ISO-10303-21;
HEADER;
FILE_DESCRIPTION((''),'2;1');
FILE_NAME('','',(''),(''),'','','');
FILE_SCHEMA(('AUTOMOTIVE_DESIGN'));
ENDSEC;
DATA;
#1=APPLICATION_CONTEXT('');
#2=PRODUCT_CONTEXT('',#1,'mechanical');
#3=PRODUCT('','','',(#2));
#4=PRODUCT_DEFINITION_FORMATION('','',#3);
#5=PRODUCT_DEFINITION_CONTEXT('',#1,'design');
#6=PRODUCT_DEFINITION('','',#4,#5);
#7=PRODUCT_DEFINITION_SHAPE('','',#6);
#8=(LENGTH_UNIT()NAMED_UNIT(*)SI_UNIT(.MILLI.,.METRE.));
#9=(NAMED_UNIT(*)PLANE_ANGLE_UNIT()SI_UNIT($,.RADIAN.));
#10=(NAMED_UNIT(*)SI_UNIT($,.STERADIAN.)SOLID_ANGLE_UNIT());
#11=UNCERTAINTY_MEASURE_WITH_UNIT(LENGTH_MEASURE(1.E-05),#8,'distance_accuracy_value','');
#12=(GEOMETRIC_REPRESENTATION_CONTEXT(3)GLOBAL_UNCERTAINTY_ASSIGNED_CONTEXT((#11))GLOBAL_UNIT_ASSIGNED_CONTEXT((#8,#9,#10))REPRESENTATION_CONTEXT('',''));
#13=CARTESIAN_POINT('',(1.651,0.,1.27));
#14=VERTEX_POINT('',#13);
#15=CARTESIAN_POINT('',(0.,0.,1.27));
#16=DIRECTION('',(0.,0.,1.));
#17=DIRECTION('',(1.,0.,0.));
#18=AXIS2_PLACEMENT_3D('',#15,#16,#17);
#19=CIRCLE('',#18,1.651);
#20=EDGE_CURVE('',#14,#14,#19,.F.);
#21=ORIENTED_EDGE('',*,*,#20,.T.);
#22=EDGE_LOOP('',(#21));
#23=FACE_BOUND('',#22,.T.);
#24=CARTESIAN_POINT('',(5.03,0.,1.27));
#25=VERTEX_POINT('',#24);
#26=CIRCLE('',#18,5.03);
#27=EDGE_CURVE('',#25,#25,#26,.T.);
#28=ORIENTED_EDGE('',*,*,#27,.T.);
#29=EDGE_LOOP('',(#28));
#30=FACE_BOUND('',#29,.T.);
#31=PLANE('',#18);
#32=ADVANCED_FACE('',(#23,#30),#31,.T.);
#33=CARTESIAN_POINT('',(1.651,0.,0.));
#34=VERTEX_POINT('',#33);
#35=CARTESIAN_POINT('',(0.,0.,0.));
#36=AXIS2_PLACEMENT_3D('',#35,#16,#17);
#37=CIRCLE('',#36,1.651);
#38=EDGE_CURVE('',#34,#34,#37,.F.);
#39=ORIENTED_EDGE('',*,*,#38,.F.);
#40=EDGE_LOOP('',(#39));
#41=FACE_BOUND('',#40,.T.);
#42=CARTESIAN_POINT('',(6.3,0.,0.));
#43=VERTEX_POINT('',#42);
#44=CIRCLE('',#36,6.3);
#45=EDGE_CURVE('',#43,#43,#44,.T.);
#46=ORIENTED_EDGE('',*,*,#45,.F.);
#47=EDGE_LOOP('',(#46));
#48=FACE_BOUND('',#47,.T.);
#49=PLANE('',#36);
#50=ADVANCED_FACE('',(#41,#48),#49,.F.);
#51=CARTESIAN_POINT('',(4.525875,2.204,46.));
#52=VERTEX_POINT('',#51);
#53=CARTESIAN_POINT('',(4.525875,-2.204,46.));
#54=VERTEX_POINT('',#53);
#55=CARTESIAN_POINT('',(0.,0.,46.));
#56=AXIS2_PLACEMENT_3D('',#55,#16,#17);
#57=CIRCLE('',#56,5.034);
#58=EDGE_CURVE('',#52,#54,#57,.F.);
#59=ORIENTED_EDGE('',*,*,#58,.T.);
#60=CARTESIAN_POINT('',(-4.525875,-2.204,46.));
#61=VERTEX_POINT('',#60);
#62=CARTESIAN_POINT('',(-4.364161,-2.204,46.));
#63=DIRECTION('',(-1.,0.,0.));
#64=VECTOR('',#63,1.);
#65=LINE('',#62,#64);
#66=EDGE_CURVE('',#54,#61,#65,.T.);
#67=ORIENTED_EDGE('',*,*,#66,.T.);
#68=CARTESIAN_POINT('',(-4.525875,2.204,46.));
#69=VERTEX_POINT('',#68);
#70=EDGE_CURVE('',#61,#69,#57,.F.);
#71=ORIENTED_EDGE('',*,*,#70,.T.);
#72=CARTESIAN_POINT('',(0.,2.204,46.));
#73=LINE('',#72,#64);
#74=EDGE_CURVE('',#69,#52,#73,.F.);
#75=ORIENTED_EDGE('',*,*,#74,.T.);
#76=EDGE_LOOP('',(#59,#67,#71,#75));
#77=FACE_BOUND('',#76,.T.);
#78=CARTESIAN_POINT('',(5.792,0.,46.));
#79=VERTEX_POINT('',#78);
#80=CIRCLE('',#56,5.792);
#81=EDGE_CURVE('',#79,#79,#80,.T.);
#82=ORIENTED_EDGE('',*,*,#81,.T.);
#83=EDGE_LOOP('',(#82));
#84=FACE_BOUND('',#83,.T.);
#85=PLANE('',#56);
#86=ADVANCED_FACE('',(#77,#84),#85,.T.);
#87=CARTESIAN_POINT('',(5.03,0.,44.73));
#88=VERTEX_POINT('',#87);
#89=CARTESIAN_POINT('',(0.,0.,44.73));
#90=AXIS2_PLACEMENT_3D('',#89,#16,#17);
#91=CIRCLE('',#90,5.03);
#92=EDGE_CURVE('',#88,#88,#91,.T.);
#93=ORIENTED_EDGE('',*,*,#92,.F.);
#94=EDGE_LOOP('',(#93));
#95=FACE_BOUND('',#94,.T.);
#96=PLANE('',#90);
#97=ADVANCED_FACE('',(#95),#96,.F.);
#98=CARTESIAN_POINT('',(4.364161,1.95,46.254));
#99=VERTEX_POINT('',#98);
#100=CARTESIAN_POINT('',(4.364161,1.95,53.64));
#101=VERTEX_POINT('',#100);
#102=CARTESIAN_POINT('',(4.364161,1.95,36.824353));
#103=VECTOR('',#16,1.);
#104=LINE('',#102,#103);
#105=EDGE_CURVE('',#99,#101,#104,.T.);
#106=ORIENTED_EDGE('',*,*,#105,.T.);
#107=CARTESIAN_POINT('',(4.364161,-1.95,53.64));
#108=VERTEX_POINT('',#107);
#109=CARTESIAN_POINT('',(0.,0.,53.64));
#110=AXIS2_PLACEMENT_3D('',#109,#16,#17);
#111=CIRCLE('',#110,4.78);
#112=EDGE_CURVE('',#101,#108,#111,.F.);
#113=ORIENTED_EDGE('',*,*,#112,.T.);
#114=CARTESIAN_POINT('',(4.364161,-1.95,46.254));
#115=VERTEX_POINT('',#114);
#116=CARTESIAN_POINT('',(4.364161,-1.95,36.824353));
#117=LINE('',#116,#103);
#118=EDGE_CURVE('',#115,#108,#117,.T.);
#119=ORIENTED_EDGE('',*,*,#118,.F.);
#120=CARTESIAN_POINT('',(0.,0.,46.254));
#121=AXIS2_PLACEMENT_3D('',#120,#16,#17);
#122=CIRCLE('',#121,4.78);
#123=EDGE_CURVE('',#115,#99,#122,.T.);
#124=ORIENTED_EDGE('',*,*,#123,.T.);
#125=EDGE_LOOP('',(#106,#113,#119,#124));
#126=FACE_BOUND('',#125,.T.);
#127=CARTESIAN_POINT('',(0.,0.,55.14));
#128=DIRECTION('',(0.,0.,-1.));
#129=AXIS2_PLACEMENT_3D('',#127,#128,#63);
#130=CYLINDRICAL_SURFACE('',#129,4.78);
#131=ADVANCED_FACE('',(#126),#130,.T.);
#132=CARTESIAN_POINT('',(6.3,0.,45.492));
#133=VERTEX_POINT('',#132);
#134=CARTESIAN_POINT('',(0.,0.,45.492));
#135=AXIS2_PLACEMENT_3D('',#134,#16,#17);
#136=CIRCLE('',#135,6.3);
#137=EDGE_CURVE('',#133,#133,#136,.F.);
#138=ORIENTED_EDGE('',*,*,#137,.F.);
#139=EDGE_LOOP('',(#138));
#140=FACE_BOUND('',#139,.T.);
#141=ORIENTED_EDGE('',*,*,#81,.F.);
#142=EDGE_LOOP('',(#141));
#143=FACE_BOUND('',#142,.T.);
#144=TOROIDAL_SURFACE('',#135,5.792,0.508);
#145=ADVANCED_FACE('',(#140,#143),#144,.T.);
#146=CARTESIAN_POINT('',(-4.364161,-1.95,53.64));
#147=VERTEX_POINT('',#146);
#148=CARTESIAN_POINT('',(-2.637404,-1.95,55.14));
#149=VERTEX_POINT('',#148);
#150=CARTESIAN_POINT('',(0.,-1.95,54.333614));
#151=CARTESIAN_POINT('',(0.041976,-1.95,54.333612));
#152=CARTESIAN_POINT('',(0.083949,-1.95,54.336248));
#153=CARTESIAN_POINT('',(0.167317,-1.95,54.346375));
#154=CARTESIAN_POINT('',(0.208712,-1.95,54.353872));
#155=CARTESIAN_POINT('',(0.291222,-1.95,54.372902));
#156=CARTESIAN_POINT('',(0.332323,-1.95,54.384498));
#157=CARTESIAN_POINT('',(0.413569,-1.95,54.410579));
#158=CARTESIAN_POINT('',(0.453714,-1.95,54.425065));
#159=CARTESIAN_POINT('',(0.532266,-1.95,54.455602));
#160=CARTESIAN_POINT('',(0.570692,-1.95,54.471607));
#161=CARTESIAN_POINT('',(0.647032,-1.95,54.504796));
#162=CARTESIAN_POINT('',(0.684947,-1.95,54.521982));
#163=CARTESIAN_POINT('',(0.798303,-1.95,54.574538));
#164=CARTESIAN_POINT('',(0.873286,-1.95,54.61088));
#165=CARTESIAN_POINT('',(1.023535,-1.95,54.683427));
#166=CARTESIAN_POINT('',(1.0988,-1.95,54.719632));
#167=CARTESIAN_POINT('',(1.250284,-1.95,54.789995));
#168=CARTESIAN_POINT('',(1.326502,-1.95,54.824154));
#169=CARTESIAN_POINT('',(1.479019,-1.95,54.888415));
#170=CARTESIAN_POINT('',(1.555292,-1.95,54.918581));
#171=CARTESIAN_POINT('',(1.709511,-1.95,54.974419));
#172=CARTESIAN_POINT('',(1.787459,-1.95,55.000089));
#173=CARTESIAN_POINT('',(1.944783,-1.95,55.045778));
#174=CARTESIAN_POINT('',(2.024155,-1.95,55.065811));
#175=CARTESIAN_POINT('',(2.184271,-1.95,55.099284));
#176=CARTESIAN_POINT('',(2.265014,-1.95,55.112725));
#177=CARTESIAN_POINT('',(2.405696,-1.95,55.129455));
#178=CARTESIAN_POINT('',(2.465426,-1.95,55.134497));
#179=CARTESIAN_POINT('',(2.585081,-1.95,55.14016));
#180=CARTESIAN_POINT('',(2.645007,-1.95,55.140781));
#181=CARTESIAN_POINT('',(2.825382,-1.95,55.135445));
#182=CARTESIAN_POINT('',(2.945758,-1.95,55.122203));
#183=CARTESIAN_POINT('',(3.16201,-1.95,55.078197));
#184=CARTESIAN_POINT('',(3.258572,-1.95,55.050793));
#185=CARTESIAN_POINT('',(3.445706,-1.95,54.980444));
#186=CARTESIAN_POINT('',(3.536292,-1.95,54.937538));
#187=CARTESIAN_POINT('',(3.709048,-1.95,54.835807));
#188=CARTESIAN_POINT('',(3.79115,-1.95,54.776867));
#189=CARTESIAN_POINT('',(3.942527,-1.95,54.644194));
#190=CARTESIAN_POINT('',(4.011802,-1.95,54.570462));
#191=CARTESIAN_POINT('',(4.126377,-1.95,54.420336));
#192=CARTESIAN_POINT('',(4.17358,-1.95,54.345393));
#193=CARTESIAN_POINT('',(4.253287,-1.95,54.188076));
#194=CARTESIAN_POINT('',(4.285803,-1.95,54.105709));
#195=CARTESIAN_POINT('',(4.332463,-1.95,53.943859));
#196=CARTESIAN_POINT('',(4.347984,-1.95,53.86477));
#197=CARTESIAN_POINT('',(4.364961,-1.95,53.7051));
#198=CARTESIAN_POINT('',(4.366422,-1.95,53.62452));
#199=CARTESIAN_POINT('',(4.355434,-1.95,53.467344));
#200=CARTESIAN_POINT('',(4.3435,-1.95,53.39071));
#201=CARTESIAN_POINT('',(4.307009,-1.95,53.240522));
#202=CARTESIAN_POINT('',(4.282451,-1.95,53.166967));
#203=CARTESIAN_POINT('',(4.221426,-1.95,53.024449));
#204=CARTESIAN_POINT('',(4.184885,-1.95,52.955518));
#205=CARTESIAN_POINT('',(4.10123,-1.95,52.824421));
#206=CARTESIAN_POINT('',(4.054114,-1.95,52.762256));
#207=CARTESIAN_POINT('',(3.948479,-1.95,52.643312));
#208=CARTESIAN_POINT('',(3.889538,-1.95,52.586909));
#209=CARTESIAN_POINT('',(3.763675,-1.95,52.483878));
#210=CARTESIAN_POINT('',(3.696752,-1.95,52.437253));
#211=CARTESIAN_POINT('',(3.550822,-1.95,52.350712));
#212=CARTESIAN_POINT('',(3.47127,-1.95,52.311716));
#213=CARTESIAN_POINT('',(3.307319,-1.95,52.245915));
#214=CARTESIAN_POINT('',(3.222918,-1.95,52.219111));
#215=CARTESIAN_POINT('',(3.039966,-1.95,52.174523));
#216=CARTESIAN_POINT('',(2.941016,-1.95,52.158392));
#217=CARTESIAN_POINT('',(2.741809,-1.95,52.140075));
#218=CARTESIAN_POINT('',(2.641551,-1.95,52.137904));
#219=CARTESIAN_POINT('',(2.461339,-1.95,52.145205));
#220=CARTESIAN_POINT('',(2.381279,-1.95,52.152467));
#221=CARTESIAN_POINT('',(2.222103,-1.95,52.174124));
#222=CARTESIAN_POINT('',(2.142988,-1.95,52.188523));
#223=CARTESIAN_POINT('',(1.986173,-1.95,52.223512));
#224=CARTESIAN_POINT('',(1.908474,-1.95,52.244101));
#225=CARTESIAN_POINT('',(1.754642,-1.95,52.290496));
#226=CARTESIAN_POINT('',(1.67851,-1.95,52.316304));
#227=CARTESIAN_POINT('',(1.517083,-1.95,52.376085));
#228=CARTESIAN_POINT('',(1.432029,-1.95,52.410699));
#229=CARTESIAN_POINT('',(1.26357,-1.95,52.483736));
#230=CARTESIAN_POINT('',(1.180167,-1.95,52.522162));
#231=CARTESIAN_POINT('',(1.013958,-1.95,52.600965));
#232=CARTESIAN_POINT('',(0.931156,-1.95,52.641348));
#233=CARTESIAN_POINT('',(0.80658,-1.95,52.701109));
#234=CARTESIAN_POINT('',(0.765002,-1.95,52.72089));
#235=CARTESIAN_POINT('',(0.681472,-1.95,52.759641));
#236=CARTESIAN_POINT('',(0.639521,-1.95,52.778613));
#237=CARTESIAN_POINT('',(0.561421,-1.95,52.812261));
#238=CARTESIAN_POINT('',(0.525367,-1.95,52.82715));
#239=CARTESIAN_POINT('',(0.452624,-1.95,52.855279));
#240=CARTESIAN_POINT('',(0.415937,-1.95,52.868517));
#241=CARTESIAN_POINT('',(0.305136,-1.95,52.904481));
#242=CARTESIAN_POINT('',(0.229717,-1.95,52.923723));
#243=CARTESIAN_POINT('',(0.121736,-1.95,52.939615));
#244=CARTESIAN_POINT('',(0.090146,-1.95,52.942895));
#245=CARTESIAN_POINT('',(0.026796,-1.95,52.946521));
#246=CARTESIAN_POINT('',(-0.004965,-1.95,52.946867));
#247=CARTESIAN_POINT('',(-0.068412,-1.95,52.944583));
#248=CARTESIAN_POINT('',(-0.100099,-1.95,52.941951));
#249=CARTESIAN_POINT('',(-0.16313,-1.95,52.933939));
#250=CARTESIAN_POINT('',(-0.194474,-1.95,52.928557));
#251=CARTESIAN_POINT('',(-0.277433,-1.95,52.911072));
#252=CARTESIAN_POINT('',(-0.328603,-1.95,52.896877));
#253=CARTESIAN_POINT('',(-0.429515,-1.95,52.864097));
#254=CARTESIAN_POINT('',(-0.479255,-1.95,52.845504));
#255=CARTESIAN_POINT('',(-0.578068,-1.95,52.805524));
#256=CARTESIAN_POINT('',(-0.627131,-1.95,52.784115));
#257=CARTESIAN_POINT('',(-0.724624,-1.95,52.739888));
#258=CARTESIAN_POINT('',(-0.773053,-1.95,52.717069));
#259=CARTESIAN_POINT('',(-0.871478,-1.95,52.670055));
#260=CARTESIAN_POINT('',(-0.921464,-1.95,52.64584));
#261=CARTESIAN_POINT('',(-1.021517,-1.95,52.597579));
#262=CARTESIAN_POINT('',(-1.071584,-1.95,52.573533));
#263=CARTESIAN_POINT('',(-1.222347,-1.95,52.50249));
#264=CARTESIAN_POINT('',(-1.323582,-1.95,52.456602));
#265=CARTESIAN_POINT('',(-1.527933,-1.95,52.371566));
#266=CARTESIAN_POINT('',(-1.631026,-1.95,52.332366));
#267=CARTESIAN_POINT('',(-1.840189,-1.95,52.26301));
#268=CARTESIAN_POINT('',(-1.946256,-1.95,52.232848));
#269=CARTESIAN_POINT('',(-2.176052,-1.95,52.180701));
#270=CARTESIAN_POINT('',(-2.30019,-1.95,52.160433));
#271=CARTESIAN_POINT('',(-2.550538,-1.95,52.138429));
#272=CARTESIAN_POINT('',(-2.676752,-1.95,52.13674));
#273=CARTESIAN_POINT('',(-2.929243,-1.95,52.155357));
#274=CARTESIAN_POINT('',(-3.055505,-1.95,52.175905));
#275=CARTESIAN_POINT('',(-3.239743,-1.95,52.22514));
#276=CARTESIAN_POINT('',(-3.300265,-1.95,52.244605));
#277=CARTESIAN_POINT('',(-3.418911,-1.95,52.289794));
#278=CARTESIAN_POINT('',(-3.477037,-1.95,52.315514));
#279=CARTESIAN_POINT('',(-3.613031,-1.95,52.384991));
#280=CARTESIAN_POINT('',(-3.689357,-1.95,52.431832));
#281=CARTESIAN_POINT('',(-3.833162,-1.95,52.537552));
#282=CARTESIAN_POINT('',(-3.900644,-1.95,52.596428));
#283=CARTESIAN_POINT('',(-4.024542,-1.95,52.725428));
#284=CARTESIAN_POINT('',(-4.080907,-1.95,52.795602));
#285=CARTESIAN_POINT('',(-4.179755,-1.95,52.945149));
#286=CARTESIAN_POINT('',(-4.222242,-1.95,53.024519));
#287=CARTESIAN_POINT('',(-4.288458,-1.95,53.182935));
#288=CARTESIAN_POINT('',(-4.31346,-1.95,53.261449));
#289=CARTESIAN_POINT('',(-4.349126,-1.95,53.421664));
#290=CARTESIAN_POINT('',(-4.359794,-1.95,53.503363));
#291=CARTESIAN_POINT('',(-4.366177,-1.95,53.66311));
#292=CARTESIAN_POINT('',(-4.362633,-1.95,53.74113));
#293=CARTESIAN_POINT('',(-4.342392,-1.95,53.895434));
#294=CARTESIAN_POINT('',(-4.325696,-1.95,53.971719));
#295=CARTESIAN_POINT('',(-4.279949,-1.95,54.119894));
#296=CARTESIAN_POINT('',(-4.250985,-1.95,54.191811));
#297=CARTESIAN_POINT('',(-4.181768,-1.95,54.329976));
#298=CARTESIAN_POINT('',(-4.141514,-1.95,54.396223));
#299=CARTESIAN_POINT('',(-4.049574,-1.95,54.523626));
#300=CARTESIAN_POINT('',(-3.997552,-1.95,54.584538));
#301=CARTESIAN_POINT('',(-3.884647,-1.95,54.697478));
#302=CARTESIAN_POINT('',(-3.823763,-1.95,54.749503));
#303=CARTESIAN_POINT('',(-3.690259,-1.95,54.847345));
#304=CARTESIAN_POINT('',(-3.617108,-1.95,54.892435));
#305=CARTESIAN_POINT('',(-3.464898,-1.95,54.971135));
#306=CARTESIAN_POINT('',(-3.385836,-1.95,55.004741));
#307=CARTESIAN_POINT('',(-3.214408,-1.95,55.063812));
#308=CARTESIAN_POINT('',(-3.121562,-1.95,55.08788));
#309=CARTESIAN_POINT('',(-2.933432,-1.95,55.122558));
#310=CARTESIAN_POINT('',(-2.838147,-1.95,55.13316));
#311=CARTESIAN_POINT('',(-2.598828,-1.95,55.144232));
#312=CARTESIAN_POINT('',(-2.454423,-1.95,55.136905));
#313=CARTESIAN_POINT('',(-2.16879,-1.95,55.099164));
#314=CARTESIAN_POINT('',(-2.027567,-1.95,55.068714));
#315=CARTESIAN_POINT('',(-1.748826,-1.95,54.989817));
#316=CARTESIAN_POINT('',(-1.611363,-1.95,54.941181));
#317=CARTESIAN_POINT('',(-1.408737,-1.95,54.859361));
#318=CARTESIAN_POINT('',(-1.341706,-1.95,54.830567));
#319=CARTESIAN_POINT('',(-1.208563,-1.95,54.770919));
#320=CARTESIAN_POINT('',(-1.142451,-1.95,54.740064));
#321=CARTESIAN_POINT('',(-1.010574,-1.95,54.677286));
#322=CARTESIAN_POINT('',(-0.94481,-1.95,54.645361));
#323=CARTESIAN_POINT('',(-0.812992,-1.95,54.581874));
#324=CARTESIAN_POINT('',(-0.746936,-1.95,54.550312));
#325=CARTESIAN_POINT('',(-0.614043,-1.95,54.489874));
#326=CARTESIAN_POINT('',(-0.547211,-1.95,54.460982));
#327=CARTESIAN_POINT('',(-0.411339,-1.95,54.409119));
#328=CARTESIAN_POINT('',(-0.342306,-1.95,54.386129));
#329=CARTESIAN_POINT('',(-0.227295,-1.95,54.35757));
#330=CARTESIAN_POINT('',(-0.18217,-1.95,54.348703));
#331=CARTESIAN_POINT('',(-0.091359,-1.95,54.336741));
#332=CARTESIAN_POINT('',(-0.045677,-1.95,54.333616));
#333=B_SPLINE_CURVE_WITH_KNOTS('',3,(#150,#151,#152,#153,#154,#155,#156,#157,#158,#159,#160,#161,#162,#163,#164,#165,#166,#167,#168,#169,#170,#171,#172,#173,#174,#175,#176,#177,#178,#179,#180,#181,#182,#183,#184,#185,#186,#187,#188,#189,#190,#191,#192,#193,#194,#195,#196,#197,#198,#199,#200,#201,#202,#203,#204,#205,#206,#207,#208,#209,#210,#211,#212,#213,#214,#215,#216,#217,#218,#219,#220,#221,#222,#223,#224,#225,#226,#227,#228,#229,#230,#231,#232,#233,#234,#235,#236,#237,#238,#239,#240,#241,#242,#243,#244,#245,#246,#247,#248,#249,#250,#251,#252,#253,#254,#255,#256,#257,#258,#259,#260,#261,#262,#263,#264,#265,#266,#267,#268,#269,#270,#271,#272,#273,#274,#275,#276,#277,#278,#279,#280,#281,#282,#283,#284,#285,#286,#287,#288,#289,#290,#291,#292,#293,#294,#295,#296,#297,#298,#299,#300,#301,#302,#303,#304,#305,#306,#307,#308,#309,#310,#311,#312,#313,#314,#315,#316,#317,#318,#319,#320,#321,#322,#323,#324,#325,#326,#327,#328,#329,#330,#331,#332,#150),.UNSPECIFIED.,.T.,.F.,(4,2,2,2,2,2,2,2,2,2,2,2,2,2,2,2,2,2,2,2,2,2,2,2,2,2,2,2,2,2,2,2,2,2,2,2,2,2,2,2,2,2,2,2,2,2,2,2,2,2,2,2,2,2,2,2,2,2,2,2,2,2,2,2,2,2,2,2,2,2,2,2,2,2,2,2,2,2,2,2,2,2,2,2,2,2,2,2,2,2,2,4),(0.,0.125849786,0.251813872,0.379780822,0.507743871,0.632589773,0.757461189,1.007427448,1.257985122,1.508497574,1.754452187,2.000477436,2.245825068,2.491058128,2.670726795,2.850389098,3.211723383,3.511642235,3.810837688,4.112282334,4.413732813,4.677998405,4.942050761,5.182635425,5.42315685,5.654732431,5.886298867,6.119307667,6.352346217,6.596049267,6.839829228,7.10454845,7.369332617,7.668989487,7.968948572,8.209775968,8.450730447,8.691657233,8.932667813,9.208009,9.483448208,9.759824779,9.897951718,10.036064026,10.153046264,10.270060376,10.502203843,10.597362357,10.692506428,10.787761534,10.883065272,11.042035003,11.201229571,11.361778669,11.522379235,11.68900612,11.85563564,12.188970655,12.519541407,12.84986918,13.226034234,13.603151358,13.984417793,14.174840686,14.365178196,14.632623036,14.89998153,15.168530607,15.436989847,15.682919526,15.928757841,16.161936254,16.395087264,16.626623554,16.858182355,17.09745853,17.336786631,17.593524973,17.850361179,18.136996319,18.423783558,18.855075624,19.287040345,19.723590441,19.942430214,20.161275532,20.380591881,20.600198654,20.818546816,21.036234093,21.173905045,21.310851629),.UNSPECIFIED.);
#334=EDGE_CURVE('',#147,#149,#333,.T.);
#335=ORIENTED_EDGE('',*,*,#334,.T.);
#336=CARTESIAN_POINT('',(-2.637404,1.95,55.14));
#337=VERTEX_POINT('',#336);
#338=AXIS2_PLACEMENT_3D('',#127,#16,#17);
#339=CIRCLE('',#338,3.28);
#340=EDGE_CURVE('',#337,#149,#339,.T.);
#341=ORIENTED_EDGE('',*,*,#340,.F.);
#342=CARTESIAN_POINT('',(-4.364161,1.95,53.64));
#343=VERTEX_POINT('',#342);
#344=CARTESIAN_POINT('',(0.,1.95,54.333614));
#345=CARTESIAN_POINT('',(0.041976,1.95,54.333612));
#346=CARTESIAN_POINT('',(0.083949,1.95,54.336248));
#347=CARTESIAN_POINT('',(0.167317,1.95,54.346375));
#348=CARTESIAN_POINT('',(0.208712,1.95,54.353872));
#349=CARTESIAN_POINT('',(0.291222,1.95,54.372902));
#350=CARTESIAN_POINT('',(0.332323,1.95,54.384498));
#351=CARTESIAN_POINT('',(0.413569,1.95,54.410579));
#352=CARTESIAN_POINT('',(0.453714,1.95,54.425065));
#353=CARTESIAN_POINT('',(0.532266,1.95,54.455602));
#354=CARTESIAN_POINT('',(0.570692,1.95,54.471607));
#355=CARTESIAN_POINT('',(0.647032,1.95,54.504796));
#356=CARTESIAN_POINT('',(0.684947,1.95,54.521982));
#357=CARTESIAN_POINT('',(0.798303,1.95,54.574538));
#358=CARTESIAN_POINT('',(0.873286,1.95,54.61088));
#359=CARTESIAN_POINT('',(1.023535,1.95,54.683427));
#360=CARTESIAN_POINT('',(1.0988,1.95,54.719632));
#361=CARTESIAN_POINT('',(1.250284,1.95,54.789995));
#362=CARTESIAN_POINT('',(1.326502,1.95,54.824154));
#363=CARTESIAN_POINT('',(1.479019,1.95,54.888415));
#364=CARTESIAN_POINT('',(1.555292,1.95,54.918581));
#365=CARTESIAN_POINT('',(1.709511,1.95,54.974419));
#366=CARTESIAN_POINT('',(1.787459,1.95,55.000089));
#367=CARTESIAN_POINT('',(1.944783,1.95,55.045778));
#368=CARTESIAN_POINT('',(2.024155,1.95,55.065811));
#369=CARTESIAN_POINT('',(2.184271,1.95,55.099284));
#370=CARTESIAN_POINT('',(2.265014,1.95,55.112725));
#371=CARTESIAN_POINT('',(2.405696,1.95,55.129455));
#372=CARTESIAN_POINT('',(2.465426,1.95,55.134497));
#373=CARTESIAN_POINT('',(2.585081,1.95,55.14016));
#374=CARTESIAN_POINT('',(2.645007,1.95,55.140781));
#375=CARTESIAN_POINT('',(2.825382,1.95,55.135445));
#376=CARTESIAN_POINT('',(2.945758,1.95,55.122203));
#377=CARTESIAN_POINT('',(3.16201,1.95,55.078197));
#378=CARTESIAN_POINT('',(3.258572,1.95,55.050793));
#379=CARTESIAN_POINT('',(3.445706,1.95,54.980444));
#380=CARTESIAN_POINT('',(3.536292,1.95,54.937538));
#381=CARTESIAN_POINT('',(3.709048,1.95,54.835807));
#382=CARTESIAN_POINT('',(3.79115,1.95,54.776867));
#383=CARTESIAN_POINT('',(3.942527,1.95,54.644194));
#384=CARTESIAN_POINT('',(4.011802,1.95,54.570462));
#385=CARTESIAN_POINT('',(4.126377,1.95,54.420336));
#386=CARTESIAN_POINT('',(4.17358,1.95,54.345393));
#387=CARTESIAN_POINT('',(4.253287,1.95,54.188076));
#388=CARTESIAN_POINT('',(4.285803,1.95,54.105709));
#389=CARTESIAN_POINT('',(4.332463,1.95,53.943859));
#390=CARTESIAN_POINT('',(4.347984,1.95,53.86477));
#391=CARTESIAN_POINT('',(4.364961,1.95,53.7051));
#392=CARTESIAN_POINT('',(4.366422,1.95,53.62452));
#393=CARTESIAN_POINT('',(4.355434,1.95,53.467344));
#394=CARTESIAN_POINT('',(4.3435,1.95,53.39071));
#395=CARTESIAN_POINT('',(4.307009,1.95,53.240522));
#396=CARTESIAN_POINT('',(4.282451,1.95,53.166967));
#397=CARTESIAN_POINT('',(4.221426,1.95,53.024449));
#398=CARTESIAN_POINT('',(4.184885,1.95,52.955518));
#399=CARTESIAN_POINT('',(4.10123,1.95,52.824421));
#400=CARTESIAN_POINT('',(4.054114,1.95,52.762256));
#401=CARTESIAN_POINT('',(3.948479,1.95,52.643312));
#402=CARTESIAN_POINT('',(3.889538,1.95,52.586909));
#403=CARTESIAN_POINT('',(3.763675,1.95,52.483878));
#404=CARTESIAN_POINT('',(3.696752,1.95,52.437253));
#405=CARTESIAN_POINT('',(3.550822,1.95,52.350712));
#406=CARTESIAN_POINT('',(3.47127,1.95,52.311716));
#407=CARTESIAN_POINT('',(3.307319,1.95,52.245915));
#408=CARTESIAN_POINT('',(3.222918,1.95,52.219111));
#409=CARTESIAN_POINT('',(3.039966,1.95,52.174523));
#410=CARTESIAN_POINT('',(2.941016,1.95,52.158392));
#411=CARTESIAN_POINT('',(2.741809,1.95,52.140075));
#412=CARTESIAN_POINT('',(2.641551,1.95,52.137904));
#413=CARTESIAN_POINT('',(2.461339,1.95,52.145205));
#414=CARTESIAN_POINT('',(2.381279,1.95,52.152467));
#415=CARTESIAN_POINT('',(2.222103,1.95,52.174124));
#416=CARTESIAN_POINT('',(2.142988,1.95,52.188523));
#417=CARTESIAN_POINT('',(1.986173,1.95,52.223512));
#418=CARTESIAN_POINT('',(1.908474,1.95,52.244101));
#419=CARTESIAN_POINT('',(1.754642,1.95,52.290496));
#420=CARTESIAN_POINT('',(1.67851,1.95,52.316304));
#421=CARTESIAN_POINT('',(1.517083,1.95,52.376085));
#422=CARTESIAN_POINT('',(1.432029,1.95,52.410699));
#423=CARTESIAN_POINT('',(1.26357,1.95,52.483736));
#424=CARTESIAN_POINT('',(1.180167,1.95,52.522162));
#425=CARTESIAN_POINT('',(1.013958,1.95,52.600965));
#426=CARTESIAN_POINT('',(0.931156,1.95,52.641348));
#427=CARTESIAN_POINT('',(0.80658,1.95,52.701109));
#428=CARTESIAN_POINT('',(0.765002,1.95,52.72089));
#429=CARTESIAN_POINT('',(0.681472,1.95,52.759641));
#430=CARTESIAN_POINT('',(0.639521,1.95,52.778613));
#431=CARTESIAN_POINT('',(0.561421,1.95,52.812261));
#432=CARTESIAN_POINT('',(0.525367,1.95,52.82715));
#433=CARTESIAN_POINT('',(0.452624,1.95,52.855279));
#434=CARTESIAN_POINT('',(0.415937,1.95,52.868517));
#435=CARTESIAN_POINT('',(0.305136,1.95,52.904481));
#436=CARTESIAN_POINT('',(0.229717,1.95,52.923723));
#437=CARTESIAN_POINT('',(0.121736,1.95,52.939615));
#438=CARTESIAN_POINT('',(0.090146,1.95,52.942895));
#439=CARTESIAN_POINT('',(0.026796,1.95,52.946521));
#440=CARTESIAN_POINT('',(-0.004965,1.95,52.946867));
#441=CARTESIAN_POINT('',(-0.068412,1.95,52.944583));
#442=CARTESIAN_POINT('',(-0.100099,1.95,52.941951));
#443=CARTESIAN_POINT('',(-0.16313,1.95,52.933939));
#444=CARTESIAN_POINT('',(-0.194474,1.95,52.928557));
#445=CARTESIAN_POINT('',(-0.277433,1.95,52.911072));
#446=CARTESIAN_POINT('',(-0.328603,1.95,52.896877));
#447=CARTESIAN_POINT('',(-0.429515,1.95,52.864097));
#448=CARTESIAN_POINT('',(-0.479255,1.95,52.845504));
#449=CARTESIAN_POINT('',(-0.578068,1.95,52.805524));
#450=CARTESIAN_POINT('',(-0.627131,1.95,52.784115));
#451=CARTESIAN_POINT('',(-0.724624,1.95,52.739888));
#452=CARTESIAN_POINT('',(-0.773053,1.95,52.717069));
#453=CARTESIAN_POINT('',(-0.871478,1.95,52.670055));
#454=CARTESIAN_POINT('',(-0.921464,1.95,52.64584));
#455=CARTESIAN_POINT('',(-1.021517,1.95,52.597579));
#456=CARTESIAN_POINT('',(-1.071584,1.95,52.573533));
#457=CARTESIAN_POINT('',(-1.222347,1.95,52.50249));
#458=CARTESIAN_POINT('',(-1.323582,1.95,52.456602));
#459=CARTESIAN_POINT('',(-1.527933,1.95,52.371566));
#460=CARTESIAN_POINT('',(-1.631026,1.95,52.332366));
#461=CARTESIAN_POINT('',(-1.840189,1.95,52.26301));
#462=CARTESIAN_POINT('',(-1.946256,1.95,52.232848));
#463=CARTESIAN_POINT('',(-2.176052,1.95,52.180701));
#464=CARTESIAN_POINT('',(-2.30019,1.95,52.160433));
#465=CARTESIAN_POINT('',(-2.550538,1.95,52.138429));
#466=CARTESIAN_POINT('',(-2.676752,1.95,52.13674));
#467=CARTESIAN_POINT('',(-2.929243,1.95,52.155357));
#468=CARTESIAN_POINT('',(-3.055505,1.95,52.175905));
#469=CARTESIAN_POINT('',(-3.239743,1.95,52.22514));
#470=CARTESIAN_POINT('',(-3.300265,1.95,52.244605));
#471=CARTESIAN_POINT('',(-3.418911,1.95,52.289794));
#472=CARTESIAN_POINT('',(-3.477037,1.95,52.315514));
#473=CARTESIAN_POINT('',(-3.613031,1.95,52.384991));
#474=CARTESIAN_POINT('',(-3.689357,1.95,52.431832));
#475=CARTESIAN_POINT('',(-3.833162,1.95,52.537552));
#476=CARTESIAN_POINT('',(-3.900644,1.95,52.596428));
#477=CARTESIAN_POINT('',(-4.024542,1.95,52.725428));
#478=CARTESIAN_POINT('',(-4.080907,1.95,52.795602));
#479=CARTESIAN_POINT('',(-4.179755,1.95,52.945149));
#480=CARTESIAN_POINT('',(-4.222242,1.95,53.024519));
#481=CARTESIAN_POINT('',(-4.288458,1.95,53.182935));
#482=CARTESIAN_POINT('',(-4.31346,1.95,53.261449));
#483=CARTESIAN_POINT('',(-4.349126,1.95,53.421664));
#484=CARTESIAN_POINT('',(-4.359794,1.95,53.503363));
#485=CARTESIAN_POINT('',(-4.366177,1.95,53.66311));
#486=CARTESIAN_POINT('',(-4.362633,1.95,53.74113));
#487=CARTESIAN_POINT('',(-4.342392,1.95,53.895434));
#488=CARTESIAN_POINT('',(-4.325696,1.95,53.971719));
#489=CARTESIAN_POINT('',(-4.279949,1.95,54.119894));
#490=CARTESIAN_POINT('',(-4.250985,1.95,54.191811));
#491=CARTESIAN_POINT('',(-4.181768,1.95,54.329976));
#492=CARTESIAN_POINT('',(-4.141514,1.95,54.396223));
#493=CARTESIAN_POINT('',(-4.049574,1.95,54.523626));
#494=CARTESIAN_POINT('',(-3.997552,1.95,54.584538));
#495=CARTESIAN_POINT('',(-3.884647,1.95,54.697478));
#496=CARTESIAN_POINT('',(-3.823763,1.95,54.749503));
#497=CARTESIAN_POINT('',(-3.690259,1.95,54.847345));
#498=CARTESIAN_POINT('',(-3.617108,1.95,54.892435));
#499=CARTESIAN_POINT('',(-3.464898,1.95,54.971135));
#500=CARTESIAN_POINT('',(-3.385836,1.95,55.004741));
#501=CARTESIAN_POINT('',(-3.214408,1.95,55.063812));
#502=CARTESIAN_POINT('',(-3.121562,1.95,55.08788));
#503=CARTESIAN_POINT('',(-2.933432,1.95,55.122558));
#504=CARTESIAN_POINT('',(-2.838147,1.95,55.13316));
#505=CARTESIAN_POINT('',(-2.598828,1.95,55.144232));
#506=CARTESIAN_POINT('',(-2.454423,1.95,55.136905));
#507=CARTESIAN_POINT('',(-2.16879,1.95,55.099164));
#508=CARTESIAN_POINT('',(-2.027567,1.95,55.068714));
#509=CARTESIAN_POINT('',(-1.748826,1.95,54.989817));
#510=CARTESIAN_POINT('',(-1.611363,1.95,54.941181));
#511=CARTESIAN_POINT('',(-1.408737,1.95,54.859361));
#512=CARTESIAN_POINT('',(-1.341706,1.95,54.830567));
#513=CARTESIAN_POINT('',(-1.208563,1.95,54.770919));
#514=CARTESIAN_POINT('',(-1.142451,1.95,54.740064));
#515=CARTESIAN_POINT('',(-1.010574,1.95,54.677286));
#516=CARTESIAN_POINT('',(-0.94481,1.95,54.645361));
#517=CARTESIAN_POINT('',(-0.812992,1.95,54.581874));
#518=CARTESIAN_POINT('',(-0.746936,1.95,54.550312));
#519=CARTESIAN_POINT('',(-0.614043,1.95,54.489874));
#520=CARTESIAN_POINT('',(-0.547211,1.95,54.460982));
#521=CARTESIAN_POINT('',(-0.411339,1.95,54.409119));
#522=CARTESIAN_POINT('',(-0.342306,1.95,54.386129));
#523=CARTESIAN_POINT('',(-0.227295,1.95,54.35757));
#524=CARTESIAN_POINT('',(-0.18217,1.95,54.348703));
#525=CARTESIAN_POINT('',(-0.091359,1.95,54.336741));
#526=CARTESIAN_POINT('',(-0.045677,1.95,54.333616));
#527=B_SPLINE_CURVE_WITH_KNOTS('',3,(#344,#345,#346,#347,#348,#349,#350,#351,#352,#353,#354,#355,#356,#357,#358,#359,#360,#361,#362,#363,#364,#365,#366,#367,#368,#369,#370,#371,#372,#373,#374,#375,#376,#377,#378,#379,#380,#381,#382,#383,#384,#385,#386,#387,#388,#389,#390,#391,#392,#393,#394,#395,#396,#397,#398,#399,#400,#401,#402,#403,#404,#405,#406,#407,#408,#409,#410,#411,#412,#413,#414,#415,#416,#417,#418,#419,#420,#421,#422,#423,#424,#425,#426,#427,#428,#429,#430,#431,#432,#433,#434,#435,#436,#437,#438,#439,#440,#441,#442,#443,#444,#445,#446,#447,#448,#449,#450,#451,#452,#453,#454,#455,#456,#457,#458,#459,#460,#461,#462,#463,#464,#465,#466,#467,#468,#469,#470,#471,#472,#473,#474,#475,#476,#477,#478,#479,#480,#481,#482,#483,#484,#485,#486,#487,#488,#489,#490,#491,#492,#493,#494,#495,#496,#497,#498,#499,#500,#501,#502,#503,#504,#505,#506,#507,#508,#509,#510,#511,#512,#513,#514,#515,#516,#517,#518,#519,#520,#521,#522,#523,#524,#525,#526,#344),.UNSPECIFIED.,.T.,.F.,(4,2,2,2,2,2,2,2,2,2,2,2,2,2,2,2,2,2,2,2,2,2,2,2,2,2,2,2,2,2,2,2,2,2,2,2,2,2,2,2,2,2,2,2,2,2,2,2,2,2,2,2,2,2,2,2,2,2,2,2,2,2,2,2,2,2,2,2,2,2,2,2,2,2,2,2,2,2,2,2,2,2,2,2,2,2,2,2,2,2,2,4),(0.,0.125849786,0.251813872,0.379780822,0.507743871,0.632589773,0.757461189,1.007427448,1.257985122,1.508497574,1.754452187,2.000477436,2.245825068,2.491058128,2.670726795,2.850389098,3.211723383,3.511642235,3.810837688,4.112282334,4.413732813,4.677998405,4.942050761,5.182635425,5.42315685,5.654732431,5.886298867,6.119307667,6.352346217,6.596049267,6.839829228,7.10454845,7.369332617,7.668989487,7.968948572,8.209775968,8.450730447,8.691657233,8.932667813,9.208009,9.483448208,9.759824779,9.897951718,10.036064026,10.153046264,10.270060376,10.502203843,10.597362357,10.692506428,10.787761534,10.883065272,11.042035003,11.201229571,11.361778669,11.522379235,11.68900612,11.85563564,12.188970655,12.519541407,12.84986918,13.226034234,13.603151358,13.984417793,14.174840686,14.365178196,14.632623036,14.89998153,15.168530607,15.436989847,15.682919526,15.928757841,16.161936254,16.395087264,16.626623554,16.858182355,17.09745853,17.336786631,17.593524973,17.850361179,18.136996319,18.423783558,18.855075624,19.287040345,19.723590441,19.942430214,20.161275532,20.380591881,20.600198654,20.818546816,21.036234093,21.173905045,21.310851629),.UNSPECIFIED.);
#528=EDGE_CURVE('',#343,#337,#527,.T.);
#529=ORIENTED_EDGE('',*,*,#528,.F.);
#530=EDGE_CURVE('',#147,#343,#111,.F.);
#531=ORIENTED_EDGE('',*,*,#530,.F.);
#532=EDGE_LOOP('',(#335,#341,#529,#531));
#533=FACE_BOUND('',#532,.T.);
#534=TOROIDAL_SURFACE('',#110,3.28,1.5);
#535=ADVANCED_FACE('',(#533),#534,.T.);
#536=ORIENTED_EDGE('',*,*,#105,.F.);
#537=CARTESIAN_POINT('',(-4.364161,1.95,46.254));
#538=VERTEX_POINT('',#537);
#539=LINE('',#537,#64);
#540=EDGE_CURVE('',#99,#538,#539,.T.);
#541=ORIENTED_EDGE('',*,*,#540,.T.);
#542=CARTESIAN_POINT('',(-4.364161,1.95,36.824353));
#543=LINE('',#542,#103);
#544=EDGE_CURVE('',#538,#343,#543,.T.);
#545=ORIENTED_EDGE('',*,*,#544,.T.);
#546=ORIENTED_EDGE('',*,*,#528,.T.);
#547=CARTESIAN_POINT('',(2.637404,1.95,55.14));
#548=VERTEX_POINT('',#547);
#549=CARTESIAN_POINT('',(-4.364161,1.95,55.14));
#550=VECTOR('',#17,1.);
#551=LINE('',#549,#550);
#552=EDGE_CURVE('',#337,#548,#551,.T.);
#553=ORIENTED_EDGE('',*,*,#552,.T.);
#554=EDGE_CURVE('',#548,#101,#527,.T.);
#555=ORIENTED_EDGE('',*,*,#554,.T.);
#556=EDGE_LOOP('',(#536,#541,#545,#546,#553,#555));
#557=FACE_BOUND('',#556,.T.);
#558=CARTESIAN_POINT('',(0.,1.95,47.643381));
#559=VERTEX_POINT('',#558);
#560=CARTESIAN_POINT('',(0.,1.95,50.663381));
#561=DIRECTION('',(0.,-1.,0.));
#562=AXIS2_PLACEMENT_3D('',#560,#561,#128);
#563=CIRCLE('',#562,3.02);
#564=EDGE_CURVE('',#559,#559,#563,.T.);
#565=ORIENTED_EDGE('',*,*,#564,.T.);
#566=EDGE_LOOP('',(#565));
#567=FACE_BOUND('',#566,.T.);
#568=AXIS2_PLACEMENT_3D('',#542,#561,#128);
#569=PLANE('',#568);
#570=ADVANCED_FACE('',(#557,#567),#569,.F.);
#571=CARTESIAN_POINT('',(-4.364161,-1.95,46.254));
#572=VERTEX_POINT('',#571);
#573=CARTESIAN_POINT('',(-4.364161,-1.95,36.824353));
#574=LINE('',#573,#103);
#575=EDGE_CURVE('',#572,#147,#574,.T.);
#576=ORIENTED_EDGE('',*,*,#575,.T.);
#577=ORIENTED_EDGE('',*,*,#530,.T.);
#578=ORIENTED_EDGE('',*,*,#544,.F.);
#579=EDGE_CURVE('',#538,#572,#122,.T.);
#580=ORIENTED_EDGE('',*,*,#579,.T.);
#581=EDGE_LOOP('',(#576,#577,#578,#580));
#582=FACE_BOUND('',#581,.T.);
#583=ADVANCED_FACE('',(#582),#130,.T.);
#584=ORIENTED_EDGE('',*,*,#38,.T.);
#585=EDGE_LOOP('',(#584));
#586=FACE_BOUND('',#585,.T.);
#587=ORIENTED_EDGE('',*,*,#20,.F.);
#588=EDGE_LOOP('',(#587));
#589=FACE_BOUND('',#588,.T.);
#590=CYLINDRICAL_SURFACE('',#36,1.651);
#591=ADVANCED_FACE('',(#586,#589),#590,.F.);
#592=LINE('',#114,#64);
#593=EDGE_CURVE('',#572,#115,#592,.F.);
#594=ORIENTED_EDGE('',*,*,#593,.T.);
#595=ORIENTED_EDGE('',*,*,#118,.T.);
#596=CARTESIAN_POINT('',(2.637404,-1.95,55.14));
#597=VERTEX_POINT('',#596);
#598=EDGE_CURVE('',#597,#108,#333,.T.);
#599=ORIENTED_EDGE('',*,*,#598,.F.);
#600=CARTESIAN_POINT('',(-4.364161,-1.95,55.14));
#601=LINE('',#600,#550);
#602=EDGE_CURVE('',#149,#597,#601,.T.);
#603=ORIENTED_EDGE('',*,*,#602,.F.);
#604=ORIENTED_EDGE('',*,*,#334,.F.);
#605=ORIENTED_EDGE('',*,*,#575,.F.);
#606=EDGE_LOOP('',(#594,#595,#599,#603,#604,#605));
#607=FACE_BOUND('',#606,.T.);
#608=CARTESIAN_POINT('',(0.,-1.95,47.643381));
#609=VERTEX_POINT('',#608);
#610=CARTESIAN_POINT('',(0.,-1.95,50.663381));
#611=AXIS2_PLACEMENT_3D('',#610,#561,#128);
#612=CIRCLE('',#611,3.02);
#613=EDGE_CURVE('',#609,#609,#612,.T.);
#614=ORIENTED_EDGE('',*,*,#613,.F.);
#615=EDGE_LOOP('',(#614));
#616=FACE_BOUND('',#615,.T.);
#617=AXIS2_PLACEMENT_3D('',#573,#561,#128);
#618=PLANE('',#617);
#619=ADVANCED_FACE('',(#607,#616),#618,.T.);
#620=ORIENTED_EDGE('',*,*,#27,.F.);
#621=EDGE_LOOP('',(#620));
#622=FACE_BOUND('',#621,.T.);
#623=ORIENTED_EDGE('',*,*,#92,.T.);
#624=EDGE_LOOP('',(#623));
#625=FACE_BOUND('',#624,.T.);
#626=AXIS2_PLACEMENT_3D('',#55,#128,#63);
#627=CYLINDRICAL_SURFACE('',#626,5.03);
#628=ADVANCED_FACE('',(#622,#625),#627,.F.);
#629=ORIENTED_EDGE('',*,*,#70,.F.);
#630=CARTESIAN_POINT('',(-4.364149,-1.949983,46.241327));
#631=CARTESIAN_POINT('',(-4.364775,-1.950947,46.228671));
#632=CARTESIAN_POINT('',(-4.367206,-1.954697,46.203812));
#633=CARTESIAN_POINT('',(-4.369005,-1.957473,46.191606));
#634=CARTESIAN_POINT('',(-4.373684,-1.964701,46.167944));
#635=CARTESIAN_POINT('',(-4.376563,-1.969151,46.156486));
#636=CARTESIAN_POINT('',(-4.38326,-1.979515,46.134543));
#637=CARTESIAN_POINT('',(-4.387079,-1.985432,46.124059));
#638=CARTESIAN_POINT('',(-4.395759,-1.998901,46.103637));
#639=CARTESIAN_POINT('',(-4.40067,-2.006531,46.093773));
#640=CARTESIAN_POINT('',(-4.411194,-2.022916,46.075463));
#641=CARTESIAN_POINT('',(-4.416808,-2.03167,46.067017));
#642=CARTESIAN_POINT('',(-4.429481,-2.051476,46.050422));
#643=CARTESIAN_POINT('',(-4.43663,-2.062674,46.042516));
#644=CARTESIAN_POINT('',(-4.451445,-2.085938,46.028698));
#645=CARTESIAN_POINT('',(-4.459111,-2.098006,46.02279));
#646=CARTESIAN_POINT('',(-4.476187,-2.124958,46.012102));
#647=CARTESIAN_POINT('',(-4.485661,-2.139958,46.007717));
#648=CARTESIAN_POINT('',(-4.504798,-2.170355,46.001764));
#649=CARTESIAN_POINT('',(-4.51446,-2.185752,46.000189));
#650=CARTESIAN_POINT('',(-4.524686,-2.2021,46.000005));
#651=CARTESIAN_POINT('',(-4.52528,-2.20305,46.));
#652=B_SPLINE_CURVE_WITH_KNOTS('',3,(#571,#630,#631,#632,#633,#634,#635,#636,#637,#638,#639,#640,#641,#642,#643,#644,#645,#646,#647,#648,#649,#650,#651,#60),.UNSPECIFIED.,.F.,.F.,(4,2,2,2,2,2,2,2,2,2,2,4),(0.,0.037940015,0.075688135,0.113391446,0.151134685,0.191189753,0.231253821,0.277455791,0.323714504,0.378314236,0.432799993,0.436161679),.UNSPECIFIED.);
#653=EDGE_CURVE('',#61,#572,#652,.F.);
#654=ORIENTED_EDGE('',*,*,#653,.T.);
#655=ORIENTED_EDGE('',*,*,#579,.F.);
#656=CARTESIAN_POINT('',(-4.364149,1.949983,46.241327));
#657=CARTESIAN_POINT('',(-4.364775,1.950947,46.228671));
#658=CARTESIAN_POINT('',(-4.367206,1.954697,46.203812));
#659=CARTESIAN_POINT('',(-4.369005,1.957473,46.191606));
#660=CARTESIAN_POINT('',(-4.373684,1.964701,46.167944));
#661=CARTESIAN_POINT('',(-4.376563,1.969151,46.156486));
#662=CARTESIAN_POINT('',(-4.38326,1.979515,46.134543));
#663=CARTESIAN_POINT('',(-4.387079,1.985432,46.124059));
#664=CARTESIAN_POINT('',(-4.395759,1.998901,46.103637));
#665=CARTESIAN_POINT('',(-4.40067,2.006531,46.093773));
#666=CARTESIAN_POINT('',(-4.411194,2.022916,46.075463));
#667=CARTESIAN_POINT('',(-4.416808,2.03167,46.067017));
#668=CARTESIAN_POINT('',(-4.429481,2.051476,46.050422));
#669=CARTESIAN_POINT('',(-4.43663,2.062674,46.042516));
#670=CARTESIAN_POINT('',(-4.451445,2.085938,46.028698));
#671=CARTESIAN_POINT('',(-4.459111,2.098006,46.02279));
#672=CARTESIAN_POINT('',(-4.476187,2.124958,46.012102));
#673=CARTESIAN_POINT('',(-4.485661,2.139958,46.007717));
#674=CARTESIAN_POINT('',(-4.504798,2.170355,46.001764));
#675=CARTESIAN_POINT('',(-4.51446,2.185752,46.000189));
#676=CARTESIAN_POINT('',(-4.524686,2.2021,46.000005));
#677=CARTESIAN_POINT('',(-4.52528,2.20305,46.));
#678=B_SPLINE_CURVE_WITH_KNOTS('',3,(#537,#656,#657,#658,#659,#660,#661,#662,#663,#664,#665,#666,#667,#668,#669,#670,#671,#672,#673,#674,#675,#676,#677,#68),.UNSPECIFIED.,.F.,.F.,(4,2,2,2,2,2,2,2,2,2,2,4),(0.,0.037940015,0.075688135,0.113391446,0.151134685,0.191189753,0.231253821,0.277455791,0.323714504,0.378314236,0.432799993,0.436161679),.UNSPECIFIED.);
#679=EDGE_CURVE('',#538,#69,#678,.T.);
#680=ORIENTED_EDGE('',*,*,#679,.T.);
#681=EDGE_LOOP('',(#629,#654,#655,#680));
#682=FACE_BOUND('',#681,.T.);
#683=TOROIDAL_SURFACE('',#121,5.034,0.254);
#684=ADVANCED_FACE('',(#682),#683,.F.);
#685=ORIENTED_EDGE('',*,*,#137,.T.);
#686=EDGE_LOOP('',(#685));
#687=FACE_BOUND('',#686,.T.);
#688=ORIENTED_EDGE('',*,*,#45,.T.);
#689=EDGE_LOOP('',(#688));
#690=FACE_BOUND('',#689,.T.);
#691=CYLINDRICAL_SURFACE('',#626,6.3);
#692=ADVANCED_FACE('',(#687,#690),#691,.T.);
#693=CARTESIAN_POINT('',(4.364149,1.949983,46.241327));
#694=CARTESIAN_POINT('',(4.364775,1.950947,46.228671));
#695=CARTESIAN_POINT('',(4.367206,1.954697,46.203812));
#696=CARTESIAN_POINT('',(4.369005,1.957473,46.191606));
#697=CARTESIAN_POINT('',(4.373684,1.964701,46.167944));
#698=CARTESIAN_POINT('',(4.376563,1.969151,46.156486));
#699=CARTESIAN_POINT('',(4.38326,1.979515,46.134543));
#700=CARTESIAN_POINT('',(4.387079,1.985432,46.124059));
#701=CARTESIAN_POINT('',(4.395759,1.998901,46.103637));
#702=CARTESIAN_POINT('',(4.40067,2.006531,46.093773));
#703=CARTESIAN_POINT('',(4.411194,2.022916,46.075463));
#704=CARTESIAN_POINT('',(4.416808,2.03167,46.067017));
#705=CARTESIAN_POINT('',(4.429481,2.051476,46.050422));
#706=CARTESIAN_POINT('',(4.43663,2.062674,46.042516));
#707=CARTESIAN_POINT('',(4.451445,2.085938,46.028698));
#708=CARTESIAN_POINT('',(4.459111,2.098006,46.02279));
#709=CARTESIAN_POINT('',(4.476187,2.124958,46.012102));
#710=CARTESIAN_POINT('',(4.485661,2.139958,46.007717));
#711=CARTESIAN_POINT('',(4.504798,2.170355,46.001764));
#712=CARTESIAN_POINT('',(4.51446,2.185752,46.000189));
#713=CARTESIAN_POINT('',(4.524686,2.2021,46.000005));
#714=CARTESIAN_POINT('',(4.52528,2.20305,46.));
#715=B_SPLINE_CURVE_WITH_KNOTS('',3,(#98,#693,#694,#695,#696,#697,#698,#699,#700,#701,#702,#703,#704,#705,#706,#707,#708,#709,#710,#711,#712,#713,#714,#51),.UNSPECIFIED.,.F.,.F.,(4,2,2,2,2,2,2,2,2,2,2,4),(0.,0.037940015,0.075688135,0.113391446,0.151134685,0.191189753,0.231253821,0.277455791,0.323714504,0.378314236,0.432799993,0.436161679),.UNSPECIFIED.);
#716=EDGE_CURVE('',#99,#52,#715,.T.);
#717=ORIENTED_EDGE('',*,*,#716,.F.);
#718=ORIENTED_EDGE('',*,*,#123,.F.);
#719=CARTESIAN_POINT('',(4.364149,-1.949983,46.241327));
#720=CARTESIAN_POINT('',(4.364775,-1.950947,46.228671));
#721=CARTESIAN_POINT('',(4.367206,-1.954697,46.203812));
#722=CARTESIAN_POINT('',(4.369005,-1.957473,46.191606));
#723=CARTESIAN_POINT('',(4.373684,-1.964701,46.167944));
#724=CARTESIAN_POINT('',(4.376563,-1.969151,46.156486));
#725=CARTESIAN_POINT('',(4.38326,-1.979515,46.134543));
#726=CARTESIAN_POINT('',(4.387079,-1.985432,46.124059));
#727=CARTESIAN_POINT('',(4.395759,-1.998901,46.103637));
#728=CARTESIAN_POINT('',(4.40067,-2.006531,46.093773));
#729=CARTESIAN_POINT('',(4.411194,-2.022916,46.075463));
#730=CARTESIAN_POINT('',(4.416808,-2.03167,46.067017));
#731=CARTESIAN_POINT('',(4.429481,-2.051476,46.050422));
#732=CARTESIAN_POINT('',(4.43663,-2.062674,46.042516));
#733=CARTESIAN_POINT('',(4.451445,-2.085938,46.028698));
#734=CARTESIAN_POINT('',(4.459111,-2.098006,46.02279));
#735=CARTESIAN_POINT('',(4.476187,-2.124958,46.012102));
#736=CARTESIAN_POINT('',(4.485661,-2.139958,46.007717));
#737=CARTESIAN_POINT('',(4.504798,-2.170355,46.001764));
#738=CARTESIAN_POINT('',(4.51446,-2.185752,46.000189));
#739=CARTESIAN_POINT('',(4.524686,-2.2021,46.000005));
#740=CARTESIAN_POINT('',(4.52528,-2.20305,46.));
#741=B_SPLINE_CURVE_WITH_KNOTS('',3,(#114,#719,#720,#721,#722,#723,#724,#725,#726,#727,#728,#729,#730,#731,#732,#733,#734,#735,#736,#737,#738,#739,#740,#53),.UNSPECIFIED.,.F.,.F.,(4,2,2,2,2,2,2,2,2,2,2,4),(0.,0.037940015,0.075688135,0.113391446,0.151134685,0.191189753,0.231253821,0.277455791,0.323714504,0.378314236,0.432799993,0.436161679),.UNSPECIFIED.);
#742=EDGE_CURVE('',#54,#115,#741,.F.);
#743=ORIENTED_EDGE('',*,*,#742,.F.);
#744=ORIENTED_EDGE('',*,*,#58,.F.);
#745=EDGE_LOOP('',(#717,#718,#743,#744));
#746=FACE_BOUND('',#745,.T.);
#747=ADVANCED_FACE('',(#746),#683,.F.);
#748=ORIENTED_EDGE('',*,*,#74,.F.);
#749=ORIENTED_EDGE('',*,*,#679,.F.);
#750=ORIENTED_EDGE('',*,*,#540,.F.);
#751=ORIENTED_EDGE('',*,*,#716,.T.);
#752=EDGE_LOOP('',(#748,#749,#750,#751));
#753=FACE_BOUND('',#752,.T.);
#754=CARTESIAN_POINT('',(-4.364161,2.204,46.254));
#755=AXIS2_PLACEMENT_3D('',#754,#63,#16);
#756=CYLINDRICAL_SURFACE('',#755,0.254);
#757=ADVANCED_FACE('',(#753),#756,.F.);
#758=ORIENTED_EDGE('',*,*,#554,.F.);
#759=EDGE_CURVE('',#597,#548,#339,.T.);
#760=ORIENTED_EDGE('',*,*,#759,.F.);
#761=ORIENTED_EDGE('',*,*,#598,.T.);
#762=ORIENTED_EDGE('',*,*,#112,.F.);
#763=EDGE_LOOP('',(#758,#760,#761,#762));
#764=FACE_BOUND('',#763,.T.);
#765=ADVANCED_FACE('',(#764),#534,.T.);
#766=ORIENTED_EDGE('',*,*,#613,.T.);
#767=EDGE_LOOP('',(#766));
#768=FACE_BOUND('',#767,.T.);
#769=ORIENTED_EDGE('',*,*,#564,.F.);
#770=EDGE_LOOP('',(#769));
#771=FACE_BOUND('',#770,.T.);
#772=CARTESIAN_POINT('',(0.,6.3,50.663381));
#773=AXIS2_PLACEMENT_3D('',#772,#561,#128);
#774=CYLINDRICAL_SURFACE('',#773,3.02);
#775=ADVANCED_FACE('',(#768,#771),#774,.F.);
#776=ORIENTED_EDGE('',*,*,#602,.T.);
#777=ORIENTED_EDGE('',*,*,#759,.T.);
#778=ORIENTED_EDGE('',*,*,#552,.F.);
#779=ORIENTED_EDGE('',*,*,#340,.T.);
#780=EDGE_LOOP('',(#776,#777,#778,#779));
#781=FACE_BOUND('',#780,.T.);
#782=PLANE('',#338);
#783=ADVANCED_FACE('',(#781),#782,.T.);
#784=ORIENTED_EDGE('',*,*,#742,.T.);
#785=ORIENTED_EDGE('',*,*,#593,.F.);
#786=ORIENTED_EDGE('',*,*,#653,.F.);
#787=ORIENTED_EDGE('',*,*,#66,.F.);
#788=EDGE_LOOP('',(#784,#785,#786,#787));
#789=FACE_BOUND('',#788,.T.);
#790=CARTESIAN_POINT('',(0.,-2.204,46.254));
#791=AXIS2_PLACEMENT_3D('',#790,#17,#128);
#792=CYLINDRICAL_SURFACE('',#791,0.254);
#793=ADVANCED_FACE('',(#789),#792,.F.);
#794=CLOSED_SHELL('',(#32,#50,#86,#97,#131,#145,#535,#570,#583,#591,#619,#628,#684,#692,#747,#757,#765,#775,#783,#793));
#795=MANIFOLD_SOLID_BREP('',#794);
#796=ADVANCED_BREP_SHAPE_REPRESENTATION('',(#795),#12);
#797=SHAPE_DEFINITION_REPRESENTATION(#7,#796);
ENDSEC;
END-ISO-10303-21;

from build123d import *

# Parameters (mm, degrees)
SKETCH1_R           = 6.3
BASE_EXTRUDE_DEPTH  = 46
FILLET1_R           = 0.508
SHELL1_START        = 1.27
SHELL1_OUTLINE_R    = 5.03
SHELL1_DEPTH        = 43.46
SHELL1_2_OUTLINE_R  = 1.651
SHELL1_2_DEPTH      = 1.27
SKETCH3_R           = 4.78
BOSS_EXTRUDE1_DEPTH = 9.14
FILLET2_R           = 1.5
CUT_EXTRUDE1_START  = -9.14
CUT_EXTRUDE1_DEPTH  = 9.140003
FILLET6_R           = 0.254
SKETCH5_R           = 3.02
CUT_EXTRUDE2_DEPTH  = 57.108574321


# Read off the part's stored shape, not the designer's step: Shell1
with BuildPart() as part:
    # Sketch1 → Base-Extrude (new body)
    with BuildSketch(Plane.XY):
        Circle(SKETCH1_R)
    extrude(amount=BASE_EXTRUDE_DEPTH)

    # Fillet1
    fillet1_edges = [part.edges().sort_by_distance(p)[0] for p in [
        (-6.3, 0, 46),
    ]]
    fillet(fillet1_edges, radius=FILLET1_R)

    # Shell1 outline → Shell1 (cut)
    with BuildSketch(Plane.XY.offset(SHELL1_START)):
        Circle(SHELL1_OUTLINE_R)
    extrude(amount=SHELL1_DEPTH, mode=Mode.SUBTRACT)

    # Shell1 2 outline → Shell1 2 (cut)
    with BuildSketch(Plane.XY):
        Circle(SHELL1_2_OUTLINE_R)
    extrude(amount=SHELL1_2_DEPTH, mode=Mode.SUBTRACT)

    # Sketch3 → Boss-Extrude1 (add)
    with BuildSketch(Plane.XY.offset(46)):
        Circle(SKETCH3_R)
    extrude(amount=BOSS_EXTRUDE1_DEPTH)

    # Fillet2
    fillet2_edges = [part.edges().sort_by_distance(p)[0] for p in [
        (-4.78, 0, 55.14),
    ]]
    fillet(fillet2_edges, radius=FILLET2_R)

    # Sketch4 → Cut-Extrude1 (cut)
    with BuildSketch(Plane.XY.offset(55.14).offset(CUT_EXTRUDE1_START)):
        with BuildLine():
            Line((-4.364160859, 1.95), (4.364160859, 1.95))
            ThreePointArc((4.364160859, 1.95), (0, 4.78), (-4.364160859, 1.95))
        make_face()
        with BuildLine():
            Line((-4.364160859, -1.95), (4.364160859, -1.95))
            ThreePointArc((4.364160859, -1.95), (0, -4.78), (-4.364160859, -1.95))
        make_face()
    extrude(amount=CUT_EXTRUDE1_DEPTH, mode=Mode.SUBTRACT)

    # Fillet6
    fillet6_edges = [part.edges().sort_by_distance(p)[0] for p in [
        (-4.78, 0, 46),
        (0, 1.95, 46),
        (4.78, 0, 46),
        (0, -1.95, 46),
    ]]
    fillet(fillet6_edges, radius=FILLET6_R)

    # Sketch5 → Cut-Extrude2 (cut, through all)
    with BuildSketch(Plane.XZ.offset(1.95)):
        with Locations(Location((0, 50.663381062, 0), (0, 0, 270))):
            Circle(SKETCH5_R)
    extrude(amount=-CUT_EXTRUDE2_DEPTH, mode=Mode.SUBTRACT)


solid = part.part
